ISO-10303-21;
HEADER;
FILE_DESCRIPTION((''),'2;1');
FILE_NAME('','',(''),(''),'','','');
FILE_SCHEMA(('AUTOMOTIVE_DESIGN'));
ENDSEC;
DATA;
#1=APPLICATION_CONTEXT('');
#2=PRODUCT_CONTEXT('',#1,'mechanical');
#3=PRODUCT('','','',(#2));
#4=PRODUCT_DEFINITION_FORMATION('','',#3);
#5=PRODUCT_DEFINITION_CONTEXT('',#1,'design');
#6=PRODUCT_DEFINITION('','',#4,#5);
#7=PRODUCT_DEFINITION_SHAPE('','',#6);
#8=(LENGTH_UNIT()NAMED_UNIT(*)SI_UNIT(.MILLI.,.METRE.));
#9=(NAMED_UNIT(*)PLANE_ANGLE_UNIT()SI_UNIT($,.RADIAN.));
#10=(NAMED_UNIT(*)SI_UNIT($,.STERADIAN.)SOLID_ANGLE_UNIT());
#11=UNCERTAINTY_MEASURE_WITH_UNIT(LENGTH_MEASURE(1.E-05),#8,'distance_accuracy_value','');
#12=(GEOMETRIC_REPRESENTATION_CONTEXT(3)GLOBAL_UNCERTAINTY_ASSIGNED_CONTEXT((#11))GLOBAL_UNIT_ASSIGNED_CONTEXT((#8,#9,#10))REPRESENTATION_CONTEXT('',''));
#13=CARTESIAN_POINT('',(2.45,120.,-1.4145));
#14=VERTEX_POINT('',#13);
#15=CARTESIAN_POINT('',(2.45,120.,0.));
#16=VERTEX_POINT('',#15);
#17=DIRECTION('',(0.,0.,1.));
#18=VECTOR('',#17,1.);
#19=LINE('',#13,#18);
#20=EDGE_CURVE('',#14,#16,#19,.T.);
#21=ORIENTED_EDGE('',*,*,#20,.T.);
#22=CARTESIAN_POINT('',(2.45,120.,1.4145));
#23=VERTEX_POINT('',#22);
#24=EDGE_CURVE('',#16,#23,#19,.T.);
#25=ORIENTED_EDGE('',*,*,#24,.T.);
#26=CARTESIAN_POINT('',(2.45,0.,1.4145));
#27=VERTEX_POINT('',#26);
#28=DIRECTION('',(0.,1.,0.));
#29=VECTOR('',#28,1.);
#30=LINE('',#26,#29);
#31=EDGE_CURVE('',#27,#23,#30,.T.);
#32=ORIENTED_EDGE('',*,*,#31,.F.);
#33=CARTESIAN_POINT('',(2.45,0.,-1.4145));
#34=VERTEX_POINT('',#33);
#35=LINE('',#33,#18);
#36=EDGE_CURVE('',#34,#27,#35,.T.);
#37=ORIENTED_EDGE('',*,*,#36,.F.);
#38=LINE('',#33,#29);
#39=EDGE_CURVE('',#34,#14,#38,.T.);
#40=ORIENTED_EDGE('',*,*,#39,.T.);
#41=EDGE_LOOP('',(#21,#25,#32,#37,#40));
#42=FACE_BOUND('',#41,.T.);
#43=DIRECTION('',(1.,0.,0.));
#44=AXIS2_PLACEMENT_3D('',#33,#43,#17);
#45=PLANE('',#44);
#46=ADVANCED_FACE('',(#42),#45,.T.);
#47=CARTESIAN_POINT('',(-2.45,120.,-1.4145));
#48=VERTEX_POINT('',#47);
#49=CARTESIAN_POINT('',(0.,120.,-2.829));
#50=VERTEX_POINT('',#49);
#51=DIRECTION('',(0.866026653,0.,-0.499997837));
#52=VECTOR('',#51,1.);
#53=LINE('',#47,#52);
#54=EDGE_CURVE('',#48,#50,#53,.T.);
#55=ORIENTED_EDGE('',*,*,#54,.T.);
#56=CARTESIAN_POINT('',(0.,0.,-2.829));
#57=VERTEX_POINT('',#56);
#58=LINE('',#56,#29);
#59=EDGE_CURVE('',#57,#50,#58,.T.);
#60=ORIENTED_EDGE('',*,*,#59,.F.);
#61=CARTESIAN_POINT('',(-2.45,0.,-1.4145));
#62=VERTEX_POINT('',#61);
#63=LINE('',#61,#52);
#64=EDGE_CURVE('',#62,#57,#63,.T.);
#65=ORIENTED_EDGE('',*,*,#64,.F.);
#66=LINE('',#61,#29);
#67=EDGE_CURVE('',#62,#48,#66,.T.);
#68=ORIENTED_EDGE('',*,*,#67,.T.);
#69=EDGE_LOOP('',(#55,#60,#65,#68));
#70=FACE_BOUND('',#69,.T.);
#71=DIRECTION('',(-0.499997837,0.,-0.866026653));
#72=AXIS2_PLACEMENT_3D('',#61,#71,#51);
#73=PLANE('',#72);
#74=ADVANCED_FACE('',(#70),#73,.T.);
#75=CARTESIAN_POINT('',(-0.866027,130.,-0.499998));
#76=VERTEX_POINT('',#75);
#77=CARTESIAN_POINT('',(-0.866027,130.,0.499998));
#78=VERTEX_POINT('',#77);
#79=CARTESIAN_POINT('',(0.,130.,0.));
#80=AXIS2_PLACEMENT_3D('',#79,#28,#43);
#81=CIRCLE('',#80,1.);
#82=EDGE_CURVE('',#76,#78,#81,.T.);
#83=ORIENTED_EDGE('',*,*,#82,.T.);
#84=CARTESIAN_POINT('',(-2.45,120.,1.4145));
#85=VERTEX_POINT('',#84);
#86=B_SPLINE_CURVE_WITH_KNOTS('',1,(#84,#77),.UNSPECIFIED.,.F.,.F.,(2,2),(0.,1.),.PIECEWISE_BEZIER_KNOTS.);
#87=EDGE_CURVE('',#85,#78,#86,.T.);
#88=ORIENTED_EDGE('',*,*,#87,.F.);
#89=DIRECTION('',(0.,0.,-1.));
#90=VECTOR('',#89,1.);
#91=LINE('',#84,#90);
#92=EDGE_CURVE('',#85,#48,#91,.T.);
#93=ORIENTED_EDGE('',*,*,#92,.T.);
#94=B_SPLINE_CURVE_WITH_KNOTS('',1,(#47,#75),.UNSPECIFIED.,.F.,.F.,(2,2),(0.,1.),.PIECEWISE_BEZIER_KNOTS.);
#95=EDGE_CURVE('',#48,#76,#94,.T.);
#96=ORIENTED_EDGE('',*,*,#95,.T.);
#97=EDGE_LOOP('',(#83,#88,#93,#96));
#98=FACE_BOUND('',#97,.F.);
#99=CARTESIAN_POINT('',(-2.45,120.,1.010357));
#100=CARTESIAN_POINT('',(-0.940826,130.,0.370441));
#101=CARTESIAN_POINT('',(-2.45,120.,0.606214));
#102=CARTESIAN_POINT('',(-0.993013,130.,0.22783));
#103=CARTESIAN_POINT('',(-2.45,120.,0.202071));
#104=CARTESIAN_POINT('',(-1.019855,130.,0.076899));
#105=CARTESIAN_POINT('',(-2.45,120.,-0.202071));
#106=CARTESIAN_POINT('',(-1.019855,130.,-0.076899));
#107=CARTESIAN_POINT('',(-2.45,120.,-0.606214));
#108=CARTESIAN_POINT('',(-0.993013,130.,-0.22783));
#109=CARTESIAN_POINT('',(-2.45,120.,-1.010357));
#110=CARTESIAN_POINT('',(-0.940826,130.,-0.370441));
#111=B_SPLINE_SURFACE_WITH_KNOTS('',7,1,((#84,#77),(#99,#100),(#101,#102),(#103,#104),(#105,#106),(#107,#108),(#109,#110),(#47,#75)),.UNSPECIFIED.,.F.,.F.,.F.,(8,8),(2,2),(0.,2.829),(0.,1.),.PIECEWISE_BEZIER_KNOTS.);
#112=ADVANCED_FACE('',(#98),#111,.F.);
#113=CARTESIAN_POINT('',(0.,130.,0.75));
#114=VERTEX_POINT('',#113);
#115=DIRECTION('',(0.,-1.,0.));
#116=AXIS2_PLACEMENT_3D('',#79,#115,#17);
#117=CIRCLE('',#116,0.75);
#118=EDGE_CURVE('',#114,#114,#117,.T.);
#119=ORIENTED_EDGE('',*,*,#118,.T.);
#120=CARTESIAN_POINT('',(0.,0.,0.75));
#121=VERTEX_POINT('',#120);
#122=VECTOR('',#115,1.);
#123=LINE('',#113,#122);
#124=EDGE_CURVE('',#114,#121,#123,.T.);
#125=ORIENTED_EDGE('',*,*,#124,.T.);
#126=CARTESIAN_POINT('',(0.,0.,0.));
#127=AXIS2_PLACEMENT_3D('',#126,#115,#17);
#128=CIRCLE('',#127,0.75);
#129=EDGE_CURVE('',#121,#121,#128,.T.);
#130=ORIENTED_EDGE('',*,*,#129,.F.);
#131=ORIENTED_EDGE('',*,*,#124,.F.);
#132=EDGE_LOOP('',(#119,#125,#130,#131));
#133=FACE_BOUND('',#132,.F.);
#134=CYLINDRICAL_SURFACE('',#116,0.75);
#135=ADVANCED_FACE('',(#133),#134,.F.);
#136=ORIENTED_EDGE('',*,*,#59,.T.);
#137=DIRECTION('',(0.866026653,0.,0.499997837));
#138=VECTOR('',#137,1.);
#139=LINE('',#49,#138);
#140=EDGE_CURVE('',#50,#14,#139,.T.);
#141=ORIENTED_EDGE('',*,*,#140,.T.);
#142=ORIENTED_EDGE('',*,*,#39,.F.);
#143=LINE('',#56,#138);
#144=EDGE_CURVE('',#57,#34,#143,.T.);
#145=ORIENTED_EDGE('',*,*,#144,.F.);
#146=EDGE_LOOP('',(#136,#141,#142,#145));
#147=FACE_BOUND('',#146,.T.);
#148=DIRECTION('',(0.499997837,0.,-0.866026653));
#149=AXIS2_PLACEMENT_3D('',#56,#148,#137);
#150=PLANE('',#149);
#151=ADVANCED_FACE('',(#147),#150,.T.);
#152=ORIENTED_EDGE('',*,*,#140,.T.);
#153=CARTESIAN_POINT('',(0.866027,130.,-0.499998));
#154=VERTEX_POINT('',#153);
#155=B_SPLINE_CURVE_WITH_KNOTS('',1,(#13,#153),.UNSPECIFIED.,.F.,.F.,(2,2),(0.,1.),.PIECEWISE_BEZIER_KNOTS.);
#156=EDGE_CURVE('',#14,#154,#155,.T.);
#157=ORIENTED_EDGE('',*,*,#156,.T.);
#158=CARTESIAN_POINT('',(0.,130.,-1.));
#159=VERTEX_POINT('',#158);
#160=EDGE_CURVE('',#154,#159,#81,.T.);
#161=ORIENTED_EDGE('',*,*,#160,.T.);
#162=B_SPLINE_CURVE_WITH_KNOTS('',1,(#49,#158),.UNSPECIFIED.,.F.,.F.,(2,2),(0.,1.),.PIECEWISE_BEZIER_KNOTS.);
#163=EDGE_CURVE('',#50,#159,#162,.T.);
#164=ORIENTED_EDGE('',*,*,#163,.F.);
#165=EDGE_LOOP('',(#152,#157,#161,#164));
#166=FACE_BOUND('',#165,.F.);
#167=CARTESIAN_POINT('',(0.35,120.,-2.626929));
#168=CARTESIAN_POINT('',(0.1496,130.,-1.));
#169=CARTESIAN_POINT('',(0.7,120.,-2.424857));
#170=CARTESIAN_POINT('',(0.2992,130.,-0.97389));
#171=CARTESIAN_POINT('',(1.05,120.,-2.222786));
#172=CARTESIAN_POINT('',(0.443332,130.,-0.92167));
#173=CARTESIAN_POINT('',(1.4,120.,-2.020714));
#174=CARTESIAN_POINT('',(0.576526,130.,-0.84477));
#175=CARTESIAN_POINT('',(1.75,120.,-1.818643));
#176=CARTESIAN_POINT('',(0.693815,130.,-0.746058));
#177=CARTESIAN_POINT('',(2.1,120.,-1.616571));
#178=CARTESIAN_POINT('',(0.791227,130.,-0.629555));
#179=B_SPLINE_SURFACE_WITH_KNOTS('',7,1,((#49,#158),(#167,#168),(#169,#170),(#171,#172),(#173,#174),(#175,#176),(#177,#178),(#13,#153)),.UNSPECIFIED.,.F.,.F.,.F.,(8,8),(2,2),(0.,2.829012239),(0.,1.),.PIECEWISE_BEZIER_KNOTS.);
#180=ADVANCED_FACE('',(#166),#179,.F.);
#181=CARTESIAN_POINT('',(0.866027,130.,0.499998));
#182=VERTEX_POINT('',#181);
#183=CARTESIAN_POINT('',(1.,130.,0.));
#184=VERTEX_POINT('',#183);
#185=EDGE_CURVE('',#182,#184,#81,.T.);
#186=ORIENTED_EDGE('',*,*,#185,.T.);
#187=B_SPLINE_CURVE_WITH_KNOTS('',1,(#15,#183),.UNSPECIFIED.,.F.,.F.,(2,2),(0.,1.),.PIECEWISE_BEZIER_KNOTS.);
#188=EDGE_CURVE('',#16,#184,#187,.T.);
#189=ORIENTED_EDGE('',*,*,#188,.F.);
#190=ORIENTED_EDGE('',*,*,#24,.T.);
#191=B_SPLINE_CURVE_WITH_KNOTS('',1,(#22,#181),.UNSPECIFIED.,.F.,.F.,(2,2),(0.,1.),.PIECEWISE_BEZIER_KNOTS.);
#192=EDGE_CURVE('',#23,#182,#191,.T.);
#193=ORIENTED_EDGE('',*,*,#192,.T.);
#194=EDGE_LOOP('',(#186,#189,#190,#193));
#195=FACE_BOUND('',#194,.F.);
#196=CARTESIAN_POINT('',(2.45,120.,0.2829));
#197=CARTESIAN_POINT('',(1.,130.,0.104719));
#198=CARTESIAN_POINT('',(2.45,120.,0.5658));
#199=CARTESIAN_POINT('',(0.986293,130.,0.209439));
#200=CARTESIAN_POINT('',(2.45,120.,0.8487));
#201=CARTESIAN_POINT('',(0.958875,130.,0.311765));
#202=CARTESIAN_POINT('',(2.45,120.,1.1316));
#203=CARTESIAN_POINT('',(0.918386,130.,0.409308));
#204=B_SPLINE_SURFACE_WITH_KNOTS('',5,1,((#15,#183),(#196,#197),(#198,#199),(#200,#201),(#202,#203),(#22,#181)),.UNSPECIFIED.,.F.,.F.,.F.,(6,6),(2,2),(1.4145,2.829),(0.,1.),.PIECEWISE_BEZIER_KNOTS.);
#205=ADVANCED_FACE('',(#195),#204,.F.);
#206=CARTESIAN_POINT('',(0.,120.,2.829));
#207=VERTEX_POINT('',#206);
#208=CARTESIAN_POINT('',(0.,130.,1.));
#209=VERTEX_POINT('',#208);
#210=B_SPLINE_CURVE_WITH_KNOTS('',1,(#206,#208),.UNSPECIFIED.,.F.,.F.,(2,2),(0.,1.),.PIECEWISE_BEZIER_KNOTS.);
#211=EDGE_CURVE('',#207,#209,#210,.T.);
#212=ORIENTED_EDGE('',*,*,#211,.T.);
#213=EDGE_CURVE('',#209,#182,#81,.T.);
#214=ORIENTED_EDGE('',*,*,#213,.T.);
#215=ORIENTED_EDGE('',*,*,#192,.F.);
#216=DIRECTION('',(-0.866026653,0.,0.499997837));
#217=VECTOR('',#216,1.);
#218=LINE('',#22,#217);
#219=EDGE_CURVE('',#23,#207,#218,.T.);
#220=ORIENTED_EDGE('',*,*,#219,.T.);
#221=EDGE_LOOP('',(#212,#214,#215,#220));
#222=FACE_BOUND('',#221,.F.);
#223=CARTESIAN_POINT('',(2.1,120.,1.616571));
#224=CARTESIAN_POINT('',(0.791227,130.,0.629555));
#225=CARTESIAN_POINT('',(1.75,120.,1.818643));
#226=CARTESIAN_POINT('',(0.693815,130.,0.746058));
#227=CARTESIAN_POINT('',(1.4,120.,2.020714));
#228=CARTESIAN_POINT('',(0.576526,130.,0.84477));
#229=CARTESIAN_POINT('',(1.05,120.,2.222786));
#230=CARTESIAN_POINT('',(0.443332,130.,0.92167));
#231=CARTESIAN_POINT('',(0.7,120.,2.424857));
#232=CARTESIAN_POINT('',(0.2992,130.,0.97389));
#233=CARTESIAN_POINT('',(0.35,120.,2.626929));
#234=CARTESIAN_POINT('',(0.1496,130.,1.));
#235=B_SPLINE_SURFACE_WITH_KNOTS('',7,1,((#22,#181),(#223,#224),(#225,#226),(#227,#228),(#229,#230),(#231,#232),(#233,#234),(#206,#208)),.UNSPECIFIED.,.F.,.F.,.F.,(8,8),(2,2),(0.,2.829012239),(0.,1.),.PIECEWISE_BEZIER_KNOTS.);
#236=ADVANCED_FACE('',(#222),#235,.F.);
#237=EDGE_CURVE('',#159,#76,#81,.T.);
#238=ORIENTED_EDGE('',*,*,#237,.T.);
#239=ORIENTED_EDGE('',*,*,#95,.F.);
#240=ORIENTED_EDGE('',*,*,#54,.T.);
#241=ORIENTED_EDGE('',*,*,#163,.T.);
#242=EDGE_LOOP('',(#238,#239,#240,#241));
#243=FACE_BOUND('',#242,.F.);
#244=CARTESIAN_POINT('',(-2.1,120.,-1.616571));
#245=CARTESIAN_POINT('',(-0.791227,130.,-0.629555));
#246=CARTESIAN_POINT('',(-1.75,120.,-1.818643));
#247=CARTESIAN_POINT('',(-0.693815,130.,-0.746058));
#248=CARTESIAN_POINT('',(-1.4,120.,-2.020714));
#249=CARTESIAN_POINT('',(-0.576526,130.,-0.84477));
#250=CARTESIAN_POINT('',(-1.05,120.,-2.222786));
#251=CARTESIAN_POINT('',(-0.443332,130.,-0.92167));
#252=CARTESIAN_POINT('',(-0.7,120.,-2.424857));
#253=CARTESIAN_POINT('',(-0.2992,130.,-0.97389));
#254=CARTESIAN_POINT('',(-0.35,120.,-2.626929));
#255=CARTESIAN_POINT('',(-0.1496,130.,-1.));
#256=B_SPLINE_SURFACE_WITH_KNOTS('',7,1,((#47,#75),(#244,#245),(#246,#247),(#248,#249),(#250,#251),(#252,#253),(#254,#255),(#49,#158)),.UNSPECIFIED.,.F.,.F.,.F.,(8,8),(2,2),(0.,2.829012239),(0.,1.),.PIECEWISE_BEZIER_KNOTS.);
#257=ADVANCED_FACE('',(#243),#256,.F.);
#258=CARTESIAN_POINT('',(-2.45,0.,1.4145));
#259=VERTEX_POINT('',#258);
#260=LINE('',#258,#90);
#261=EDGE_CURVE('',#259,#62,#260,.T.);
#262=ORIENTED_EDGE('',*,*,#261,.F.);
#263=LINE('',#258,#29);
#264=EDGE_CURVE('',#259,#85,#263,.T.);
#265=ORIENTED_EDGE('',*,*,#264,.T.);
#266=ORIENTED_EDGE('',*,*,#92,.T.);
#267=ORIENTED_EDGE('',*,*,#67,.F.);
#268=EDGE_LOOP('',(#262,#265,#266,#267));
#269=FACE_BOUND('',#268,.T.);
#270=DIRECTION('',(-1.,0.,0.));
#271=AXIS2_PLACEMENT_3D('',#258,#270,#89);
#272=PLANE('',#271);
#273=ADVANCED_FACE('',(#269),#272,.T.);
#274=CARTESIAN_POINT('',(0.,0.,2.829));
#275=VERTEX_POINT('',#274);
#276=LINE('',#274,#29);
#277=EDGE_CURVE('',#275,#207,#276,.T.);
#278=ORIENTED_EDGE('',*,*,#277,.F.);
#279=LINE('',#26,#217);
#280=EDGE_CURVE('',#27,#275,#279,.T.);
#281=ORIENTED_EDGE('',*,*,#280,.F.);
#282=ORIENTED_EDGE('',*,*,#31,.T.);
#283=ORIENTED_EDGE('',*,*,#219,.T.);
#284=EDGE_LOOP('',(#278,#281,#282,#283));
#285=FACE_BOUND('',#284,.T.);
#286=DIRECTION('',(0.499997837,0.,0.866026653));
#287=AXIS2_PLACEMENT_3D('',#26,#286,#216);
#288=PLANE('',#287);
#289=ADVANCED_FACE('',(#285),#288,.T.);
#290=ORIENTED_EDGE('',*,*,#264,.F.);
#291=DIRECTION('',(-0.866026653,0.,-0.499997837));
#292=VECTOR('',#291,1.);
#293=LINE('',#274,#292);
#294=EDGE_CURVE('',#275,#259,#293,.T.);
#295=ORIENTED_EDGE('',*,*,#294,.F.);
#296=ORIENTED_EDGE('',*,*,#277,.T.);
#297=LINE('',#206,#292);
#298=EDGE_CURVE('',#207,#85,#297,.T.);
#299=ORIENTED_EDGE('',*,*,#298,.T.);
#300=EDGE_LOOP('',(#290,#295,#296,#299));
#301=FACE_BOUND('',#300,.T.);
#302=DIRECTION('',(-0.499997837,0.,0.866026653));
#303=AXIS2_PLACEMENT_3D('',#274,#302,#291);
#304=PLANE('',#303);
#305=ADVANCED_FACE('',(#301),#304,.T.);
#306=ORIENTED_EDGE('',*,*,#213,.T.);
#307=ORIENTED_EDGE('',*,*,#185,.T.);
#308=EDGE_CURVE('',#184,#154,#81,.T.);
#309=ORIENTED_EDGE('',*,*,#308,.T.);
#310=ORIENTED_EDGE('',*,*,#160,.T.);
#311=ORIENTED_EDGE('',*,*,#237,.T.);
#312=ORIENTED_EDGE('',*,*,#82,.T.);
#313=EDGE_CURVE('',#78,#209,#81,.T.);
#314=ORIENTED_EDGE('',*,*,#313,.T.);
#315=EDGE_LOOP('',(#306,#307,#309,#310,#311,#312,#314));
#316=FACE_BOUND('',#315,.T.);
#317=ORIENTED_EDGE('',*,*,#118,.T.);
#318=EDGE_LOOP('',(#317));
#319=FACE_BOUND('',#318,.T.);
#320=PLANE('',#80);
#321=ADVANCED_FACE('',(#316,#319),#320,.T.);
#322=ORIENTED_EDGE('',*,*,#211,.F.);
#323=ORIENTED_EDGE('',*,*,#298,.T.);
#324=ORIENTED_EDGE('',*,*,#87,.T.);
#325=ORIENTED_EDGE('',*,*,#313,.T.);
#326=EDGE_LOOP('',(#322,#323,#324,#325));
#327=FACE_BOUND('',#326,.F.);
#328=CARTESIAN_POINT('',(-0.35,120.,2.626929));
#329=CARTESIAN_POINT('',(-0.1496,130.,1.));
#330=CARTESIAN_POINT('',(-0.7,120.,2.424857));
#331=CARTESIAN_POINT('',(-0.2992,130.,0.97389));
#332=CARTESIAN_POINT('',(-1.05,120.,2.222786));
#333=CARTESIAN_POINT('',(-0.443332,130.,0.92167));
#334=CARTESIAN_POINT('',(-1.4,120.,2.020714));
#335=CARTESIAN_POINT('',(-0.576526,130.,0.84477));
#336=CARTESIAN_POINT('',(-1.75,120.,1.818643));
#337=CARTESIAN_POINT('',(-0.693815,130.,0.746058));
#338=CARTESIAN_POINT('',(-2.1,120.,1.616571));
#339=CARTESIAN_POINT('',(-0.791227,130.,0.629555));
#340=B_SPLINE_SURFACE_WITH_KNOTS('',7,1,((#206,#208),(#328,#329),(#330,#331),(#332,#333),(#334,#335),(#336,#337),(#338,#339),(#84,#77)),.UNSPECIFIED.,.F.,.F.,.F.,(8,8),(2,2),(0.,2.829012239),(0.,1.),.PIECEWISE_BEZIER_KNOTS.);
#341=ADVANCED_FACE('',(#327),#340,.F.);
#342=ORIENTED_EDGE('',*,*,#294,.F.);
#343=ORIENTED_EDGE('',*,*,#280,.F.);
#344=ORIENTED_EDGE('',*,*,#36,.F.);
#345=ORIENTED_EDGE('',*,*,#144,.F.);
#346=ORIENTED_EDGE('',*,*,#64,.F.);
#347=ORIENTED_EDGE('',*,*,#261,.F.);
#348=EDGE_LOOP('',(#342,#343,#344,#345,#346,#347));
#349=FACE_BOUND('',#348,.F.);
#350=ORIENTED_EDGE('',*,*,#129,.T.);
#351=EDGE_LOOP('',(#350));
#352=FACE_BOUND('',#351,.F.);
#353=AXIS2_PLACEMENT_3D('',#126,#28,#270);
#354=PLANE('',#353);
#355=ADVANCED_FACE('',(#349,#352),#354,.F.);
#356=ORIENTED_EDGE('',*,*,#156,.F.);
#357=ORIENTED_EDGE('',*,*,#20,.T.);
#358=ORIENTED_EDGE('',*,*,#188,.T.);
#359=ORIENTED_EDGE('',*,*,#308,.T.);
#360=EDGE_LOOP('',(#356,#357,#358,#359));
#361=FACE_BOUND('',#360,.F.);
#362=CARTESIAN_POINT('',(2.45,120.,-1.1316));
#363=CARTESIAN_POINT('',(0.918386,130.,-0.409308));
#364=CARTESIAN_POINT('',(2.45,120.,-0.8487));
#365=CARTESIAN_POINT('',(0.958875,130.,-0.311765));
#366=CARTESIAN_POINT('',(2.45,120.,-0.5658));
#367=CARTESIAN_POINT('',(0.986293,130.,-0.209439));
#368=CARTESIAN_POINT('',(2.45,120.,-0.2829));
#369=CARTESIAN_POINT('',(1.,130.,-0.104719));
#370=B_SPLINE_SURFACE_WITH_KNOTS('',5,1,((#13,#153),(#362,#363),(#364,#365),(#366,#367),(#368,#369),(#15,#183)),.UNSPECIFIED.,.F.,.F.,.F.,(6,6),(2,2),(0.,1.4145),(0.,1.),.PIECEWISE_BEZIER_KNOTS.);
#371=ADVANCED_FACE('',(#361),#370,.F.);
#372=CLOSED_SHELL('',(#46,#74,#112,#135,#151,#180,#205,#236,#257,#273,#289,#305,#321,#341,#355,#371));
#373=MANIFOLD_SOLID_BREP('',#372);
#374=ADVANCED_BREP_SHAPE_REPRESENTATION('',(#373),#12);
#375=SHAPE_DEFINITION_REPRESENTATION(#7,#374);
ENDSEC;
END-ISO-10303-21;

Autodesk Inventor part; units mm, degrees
ref_plane "YZ Plane" through (0, 0, 0) normal (1, 0, 0) x (0, 1, 0)
ref_plane "XZ Plane" through (0, 0, 0) normal (0, 1, 0) x (-1, 0, 0)
sketch "Sketch1" plane through (0, 0, 0) normal (0, 1, 0) x (-1, 0, 0)
  line L0 (2.45, -1.4145) -> (0, -2.829)
  line L1 (0, -2.829) -> (-2.45, -1.4145)
  line L2 (-2.45, -1.4145) -> (-2.45, 1.4145)
  line L3 (-2.45, 1.4145) -> (0, 2.829)
  line L4 (0, 2.829) -> (2.45, 1.4145)
  line L5 (2.45, 1.4145) -> (2.45, -1.4145)
  point P0 (0, 0)
  point P1 (0, 0)
  dimension "d0" = 4.9
extrude "Extrusion1" add sketch "Sketch1" along normal blind 120
ref_plane "Work Plane1" through (0, 130, 0) normal (0, 1, 0) x (1, 0, 0)
sketch "Sketch2" plane through (0, 120, 0) normal (0, 1, 0) x (1, 0, 0)
  line L0 (-2.45, 1.4145) -> (0, 2.829)
  line L1 (0, 2.829) -> (2.45, 1.4145)
  line L2 (2.45, 1.4145) -> (2.45, -1.4145)
  line L3 (2.45, -1.4145) -> (0, -2.829)
  line L4 (0, -2.829) -> (-2.45, -1.4145)
  line L5 (-2.45, -1.4145) -> (-2.45, 1.4145)
  point P0 (0, 0)
  point P1 (0, 0)
  dimension "d4" = 4.9
sketch "Sketch3" plane through (0, 130, 0) normal (0, 1, 0) x (1, 0, 0)
  circle A0 centre (0, 0) radius 1
  dimension "d5" = 2
loft "Loft1" add profiles "Sketch3" section 1 edges at (-1.225, 120, -2.1218) (-2.45, 120, 0) (-1.225, 120, 2.1218) (1.225, 120, 2.1218) (2.45, 120, 0) (1.225, 120, -2.1218)
hole "Hole1" at (0, 130, 0) direction (0, -1, 0) diameter 1.5 end through all
properties part number "Pencil Shell"
